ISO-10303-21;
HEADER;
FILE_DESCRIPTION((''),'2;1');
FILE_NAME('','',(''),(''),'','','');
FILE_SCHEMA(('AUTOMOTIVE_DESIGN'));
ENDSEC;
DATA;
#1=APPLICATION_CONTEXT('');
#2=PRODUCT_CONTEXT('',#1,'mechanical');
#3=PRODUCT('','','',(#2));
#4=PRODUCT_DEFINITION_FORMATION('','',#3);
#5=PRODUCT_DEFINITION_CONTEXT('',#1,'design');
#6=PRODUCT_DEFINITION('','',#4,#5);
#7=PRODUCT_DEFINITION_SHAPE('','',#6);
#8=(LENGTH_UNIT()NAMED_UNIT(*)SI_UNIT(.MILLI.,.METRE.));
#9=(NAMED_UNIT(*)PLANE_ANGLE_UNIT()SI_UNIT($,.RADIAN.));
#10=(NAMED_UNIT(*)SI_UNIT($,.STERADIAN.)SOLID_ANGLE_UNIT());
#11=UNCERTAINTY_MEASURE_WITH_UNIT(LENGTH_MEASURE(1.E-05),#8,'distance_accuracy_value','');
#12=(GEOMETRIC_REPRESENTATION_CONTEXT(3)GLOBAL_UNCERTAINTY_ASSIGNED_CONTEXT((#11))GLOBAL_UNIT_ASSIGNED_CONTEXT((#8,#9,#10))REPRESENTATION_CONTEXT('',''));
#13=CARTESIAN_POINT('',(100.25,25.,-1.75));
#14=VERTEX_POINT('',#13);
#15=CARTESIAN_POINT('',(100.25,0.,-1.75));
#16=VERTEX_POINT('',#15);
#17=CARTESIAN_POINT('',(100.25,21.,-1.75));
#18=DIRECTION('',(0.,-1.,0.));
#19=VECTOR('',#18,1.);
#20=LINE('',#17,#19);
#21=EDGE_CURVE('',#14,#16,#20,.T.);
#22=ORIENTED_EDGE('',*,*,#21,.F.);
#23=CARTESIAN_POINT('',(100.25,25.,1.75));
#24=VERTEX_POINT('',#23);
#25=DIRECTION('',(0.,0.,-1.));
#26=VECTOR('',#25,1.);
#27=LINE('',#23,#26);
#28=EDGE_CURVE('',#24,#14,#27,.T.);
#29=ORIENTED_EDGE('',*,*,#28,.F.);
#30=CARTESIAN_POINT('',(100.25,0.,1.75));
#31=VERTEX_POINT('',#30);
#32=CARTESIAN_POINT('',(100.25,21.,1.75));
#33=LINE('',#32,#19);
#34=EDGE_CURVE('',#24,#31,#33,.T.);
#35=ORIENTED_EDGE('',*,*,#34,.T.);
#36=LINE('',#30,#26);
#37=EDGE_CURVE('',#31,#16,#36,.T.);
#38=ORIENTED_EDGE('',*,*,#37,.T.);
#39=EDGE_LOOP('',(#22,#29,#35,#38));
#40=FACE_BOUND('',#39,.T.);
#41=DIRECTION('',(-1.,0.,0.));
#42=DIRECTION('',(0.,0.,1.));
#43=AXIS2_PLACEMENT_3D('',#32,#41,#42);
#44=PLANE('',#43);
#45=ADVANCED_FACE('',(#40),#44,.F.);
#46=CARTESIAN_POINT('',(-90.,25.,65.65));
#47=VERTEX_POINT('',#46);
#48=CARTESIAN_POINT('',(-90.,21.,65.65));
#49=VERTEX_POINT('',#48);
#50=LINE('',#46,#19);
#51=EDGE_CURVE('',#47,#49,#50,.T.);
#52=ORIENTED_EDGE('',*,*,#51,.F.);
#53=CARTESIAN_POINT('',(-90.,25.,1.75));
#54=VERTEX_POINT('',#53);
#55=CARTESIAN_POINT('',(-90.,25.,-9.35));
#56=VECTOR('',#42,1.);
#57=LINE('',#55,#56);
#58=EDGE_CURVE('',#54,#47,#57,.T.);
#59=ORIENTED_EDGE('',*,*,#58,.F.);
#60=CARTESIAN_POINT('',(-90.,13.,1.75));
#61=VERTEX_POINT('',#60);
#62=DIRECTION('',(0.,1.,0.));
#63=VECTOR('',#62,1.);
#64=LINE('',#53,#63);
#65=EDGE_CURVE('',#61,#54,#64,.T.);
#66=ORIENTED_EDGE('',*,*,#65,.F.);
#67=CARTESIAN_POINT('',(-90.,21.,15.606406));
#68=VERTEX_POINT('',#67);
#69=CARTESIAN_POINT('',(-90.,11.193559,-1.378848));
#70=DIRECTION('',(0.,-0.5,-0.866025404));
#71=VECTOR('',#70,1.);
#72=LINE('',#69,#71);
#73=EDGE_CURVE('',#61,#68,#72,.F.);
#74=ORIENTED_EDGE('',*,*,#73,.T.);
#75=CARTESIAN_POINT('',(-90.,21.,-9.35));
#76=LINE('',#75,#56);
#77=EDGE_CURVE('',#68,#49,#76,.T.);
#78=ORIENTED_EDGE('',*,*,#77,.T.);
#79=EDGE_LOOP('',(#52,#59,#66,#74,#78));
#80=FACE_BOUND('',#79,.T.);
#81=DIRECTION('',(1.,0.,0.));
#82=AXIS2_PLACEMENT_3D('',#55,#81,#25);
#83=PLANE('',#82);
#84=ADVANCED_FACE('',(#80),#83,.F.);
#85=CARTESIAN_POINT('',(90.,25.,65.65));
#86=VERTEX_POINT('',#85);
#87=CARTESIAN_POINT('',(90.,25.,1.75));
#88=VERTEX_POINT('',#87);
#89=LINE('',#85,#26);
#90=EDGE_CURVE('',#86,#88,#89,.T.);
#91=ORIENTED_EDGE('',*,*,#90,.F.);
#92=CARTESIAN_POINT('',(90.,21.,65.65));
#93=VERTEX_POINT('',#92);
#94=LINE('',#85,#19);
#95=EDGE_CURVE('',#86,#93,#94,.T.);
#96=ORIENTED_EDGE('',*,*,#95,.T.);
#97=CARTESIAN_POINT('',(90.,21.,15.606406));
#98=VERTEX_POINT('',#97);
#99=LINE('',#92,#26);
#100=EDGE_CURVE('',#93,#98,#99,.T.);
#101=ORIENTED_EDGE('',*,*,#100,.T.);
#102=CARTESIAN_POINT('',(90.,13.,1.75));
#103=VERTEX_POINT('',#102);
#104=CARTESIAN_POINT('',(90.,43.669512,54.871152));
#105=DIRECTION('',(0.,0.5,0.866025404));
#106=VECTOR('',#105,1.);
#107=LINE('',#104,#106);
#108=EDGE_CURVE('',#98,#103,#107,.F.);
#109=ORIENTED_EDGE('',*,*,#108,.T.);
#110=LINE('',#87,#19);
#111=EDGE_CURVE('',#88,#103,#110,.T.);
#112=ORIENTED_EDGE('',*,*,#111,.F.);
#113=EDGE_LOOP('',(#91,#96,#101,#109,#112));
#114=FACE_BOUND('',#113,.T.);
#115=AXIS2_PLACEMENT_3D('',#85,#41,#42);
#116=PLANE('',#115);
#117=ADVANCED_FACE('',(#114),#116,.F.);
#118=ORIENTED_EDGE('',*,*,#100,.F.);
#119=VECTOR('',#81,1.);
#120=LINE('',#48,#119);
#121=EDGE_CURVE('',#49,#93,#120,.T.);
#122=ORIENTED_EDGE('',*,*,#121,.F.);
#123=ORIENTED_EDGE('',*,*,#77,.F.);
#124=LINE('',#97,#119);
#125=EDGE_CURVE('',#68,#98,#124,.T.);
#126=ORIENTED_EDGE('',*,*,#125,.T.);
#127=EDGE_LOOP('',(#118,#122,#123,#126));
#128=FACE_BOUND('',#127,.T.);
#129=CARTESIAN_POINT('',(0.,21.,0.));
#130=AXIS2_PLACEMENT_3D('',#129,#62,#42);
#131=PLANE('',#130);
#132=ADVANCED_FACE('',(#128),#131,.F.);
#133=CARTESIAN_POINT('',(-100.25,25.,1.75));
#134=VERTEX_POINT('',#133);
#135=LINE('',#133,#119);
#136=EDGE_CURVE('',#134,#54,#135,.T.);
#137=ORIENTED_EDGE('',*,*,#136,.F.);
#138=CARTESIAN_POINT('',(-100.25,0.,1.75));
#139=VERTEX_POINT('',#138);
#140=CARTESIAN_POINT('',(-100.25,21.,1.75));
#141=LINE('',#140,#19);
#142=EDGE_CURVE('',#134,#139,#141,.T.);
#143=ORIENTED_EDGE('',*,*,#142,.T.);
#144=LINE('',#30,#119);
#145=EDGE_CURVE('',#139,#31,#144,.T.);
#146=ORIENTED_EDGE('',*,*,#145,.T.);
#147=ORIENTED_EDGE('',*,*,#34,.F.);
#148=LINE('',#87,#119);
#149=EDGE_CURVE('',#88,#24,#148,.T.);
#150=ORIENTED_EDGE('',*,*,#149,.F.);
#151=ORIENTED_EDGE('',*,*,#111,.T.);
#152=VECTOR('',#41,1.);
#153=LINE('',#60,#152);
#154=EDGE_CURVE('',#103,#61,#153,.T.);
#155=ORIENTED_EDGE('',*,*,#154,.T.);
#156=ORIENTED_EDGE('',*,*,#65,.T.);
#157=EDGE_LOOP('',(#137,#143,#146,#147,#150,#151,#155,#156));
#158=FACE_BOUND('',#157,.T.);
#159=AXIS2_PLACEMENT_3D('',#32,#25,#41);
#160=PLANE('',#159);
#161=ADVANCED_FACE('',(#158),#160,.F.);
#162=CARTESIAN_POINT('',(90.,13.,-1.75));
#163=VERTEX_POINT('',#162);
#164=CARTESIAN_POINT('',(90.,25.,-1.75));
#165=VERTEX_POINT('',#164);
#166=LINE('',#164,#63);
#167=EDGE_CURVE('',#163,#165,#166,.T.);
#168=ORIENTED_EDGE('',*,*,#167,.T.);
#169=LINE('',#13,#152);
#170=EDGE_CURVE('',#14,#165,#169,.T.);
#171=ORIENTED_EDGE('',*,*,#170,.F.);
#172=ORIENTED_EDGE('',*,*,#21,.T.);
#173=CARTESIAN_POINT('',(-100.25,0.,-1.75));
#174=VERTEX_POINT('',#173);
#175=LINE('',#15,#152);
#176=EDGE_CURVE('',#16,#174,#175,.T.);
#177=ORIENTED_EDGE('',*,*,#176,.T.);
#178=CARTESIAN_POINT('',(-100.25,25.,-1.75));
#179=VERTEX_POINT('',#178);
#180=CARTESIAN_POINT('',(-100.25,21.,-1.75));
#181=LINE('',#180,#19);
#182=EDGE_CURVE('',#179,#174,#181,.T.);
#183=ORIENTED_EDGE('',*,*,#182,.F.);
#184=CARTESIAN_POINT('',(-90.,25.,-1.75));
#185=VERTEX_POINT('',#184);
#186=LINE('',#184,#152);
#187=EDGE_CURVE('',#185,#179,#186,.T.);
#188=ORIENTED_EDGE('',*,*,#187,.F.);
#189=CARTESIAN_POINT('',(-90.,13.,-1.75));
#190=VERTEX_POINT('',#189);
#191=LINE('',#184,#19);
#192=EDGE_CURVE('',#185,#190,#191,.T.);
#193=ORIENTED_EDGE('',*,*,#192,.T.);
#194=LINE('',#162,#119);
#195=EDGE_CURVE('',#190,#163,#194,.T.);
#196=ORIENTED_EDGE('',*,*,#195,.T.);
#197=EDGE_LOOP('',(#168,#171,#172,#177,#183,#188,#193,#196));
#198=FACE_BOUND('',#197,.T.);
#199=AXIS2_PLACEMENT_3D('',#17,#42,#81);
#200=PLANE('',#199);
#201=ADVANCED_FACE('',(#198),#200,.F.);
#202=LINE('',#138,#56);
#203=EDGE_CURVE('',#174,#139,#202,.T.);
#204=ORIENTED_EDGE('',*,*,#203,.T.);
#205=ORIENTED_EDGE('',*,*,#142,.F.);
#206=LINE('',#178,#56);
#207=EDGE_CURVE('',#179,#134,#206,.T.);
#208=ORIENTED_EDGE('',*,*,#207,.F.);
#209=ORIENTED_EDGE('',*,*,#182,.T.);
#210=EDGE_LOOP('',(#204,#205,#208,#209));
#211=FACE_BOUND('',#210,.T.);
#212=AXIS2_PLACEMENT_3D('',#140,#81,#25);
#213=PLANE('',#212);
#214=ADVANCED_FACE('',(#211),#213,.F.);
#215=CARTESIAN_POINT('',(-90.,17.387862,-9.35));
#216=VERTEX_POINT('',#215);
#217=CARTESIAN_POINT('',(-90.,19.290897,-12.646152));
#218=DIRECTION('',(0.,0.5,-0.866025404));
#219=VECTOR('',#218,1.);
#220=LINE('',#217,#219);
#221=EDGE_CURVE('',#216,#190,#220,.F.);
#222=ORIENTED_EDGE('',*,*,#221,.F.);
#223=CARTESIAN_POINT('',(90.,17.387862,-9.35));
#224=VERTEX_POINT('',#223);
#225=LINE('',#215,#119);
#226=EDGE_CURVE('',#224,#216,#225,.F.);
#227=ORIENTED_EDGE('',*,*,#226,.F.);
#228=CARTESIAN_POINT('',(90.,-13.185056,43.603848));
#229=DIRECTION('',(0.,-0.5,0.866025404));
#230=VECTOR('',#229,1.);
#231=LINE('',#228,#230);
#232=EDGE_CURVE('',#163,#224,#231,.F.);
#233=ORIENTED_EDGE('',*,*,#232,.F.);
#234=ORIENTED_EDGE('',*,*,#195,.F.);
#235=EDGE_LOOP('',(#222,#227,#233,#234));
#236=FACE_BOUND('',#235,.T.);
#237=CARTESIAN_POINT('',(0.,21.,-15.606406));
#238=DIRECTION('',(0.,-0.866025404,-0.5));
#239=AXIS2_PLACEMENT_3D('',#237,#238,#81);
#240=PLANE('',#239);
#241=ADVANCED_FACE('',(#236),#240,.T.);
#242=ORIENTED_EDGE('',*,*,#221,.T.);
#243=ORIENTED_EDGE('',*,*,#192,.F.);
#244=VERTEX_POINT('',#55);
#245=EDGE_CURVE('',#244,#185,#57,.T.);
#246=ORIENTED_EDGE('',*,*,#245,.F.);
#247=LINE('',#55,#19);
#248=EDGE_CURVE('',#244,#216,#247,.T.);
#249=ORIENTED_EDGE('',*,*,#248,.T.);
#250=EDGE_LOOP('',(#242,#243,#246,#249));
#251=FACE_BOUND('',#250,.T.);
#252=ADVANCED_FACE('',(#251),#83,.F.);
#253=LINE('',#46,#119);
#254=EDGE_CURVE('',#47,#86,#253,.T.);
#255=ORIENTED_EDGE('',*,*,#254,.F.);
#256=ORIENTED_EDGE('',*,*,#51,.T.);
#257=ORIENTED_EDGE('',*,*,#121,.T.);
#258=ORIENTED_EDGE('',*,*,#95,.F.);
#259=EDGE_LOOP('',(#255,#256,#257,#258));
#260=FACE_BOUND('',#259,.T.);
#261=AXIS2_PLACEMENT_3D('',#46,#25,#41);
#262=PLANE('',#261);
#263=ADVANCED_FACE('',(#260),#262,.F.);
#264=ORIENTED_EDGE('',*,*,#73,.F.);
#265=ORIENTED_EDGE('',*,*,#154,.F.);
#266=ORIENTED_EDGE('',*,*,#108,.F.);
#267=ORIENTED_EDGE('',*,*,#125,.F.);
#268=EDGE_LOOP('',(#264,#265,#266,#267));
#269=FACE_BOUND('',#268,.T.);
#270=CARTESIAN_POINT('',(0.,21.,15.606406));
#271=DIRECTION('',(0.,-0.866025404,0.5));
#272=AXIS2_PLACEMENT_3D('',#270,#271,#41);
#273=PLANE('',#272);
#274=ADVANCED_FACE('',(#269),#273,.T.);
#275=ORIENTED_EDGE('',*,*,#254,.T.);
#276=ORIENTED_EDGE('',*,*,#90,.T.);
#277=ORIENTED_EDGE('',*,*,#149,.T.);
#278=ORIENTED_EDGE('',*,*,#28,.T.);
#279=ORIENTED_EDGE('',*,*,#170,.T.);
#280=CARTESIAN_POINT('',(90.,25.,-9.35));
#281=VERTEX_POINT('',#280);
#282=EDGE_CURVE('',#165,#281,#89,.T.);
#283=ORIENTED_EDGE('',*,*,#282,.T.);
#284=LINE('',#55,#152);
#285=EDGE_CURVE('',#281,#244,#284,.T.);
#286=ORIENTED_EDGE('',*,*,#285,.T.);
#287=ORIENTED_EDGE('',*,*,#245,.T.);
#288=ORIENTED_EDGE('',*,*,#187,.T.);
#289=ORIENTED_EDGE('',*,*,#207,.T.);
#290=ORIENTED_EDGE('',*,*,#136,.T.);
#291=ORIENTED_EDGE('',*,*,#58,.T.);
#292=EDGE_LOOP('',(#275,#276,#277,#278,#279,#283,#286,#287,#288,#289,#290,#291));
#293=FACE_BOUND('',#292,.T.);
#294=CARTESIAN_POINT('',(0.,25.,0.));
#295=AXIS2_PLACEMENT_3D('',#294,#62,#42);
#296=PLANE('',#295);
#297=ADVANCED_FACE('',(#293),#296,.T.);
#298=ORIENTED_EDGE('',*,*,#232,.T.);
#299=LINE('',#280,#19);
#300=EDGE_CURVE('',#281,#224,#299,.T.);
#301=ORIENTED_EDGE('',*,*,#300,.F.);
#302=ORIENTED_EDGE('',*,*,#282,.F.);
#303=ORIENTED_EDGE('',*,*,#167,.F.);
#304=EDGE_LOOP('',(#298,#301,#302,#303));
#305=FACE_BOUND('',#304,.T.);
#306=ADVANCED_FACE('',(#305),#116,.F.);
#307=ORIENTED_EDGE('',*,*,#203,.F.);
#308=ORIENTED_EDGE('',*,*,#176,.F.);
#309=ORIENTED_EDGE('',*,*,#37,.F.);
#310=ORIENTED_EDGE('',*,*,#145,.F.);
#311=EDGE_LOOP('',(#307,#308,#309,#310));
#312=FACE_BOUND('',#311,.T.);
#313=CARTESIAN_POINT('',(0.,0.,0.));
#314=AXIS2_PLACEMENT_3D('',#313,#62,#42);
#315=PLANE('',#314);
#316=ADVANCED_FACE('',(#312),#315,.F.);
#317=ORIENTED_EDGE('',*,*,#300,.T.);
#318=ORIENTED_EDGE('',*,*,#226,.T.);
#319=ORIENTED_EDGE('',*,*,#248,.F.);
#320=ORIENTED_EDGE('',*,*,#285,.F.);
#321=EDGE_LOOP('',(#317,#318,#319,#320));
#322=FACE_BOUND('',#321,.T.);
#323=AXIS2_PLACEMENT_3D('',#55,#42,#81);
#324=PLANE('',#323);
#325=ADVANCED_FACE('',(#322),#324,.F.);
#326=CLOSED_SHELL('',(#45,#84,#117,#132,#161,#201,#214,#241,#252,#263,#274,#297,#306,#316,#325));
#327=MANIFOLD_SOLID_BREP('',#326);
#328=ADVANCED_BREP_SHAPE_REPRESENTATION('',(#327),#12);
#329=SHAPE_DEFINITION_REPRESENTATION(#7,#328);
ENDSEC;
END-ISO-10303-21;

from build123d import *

# Parameters (mm, degrees)
SKETCH1_W           = 200.5
SKETCH1_H           = 3.5
BOSS_EXTRUDE1_DEPTH = 21
SKETCH3_W           = 180
SKETCH3_H           = 75
BOSS_EXTRUDE2_DEPTH = 4
CHAMFER1_SIZE       = 8
CHAMFER1_SIZE_2     = 13.856406461
SKETCH4_W           = 10.25
SKETCH4_H           = 3.5
BOSS_EXTRUDE3_DEPTH = 4


with BuildPart() as part:
    # Sketch1 → Boss-Extrude1 (new body)
    with BuildSketch(Plane(origin=(0, 0, 0), x_dir=(1, 0, 0), z_dir=(0, 1, 0))):
        Rectangle(SKETCH1_W, SKETCH1_H)
    extrude(amount=BOSS_EXTRUDE1_DEPTH)

    # Sketch3 → Boss-Extrude2 (add)
    with BuildSketch(Plane(origin=(0, 21, 0), x_dir=(1, 0, 0), z_dir=(0, 1, 0))):
        with Locations((0, -28.15)):
            Rectangle(SKETCH3_W, SKETCH3_H)
    extrude(amount=BOSS_EXTRUDE2_DEPTH)

    # Chamfer1
    # the kernel refuses this chamfer: 13.856406461, 8 mm, written as the material it adds along each edge
    with BuildSketch(Plane(origin=(-90, 21, -1.75), x_dir=(0, -0.9983227437537926, 0.0578938624026714), z_dir=(1, 0, 0))) as chamfer1_piece_1_section:
        Polygon((CHAMFER1_SIZE * 0.998322743754, CHAMFER1_SIZE * 0.0578938624027), (-CHAMFER1_SIZE_2 * 0.0578938624008, CHAMFER1_SIZE_2 * 0.998322743721), (0, 0), align=None)
    chamfer1_piece_1 = extrude(amount=180, mode=Mode.PRIVATE)
    chamfer1_piece_1 = split(chamfer1_piece_1, bisect_by=Plane(origin=(0, 17.958795912, -9.35), z_dir=(0, 0, 1)), keep=Keep.TOP, mode=Mode.PRIVATE)
    add(chamfer1_piece_1)
    with BuildSketch(Plane(origin=(90, 21, 1.75), x_dir=(0, -0.9983227437537926, -0.0578938624026714), z_dir=(-1, 0, 0))) as chamfer1_piece_2:
        Polygon((CHAMFER1_SIZE * 0.998322743754, CHAMFER1_SIZE * 0.0578938624027), (-CHAMFER1_SIZE_2 * 0.0578938624008, CHAMFER1_SIZE_2 * 0.998322743721), (0, 0), align=None)
    extrude(amount=180)

    # Sketch4 → Boss-Extrude3 (add)
    with BuildSketch(Plane(origin=(0, 21, 0), x_dir=(1, 0, 0), z_dir=(0, 1, 0))):
        with Locations((-95.125, 0)):
            Rectangle(SKETCH4_W, SKETCH4_H)
        with Locations((95.125, 0)):
            Rectangle(SKETCH4_W, SKETCH4_H)
    extrude(amount=BOSS_EXTRUDE3_DEPTH)


solid = part.part
